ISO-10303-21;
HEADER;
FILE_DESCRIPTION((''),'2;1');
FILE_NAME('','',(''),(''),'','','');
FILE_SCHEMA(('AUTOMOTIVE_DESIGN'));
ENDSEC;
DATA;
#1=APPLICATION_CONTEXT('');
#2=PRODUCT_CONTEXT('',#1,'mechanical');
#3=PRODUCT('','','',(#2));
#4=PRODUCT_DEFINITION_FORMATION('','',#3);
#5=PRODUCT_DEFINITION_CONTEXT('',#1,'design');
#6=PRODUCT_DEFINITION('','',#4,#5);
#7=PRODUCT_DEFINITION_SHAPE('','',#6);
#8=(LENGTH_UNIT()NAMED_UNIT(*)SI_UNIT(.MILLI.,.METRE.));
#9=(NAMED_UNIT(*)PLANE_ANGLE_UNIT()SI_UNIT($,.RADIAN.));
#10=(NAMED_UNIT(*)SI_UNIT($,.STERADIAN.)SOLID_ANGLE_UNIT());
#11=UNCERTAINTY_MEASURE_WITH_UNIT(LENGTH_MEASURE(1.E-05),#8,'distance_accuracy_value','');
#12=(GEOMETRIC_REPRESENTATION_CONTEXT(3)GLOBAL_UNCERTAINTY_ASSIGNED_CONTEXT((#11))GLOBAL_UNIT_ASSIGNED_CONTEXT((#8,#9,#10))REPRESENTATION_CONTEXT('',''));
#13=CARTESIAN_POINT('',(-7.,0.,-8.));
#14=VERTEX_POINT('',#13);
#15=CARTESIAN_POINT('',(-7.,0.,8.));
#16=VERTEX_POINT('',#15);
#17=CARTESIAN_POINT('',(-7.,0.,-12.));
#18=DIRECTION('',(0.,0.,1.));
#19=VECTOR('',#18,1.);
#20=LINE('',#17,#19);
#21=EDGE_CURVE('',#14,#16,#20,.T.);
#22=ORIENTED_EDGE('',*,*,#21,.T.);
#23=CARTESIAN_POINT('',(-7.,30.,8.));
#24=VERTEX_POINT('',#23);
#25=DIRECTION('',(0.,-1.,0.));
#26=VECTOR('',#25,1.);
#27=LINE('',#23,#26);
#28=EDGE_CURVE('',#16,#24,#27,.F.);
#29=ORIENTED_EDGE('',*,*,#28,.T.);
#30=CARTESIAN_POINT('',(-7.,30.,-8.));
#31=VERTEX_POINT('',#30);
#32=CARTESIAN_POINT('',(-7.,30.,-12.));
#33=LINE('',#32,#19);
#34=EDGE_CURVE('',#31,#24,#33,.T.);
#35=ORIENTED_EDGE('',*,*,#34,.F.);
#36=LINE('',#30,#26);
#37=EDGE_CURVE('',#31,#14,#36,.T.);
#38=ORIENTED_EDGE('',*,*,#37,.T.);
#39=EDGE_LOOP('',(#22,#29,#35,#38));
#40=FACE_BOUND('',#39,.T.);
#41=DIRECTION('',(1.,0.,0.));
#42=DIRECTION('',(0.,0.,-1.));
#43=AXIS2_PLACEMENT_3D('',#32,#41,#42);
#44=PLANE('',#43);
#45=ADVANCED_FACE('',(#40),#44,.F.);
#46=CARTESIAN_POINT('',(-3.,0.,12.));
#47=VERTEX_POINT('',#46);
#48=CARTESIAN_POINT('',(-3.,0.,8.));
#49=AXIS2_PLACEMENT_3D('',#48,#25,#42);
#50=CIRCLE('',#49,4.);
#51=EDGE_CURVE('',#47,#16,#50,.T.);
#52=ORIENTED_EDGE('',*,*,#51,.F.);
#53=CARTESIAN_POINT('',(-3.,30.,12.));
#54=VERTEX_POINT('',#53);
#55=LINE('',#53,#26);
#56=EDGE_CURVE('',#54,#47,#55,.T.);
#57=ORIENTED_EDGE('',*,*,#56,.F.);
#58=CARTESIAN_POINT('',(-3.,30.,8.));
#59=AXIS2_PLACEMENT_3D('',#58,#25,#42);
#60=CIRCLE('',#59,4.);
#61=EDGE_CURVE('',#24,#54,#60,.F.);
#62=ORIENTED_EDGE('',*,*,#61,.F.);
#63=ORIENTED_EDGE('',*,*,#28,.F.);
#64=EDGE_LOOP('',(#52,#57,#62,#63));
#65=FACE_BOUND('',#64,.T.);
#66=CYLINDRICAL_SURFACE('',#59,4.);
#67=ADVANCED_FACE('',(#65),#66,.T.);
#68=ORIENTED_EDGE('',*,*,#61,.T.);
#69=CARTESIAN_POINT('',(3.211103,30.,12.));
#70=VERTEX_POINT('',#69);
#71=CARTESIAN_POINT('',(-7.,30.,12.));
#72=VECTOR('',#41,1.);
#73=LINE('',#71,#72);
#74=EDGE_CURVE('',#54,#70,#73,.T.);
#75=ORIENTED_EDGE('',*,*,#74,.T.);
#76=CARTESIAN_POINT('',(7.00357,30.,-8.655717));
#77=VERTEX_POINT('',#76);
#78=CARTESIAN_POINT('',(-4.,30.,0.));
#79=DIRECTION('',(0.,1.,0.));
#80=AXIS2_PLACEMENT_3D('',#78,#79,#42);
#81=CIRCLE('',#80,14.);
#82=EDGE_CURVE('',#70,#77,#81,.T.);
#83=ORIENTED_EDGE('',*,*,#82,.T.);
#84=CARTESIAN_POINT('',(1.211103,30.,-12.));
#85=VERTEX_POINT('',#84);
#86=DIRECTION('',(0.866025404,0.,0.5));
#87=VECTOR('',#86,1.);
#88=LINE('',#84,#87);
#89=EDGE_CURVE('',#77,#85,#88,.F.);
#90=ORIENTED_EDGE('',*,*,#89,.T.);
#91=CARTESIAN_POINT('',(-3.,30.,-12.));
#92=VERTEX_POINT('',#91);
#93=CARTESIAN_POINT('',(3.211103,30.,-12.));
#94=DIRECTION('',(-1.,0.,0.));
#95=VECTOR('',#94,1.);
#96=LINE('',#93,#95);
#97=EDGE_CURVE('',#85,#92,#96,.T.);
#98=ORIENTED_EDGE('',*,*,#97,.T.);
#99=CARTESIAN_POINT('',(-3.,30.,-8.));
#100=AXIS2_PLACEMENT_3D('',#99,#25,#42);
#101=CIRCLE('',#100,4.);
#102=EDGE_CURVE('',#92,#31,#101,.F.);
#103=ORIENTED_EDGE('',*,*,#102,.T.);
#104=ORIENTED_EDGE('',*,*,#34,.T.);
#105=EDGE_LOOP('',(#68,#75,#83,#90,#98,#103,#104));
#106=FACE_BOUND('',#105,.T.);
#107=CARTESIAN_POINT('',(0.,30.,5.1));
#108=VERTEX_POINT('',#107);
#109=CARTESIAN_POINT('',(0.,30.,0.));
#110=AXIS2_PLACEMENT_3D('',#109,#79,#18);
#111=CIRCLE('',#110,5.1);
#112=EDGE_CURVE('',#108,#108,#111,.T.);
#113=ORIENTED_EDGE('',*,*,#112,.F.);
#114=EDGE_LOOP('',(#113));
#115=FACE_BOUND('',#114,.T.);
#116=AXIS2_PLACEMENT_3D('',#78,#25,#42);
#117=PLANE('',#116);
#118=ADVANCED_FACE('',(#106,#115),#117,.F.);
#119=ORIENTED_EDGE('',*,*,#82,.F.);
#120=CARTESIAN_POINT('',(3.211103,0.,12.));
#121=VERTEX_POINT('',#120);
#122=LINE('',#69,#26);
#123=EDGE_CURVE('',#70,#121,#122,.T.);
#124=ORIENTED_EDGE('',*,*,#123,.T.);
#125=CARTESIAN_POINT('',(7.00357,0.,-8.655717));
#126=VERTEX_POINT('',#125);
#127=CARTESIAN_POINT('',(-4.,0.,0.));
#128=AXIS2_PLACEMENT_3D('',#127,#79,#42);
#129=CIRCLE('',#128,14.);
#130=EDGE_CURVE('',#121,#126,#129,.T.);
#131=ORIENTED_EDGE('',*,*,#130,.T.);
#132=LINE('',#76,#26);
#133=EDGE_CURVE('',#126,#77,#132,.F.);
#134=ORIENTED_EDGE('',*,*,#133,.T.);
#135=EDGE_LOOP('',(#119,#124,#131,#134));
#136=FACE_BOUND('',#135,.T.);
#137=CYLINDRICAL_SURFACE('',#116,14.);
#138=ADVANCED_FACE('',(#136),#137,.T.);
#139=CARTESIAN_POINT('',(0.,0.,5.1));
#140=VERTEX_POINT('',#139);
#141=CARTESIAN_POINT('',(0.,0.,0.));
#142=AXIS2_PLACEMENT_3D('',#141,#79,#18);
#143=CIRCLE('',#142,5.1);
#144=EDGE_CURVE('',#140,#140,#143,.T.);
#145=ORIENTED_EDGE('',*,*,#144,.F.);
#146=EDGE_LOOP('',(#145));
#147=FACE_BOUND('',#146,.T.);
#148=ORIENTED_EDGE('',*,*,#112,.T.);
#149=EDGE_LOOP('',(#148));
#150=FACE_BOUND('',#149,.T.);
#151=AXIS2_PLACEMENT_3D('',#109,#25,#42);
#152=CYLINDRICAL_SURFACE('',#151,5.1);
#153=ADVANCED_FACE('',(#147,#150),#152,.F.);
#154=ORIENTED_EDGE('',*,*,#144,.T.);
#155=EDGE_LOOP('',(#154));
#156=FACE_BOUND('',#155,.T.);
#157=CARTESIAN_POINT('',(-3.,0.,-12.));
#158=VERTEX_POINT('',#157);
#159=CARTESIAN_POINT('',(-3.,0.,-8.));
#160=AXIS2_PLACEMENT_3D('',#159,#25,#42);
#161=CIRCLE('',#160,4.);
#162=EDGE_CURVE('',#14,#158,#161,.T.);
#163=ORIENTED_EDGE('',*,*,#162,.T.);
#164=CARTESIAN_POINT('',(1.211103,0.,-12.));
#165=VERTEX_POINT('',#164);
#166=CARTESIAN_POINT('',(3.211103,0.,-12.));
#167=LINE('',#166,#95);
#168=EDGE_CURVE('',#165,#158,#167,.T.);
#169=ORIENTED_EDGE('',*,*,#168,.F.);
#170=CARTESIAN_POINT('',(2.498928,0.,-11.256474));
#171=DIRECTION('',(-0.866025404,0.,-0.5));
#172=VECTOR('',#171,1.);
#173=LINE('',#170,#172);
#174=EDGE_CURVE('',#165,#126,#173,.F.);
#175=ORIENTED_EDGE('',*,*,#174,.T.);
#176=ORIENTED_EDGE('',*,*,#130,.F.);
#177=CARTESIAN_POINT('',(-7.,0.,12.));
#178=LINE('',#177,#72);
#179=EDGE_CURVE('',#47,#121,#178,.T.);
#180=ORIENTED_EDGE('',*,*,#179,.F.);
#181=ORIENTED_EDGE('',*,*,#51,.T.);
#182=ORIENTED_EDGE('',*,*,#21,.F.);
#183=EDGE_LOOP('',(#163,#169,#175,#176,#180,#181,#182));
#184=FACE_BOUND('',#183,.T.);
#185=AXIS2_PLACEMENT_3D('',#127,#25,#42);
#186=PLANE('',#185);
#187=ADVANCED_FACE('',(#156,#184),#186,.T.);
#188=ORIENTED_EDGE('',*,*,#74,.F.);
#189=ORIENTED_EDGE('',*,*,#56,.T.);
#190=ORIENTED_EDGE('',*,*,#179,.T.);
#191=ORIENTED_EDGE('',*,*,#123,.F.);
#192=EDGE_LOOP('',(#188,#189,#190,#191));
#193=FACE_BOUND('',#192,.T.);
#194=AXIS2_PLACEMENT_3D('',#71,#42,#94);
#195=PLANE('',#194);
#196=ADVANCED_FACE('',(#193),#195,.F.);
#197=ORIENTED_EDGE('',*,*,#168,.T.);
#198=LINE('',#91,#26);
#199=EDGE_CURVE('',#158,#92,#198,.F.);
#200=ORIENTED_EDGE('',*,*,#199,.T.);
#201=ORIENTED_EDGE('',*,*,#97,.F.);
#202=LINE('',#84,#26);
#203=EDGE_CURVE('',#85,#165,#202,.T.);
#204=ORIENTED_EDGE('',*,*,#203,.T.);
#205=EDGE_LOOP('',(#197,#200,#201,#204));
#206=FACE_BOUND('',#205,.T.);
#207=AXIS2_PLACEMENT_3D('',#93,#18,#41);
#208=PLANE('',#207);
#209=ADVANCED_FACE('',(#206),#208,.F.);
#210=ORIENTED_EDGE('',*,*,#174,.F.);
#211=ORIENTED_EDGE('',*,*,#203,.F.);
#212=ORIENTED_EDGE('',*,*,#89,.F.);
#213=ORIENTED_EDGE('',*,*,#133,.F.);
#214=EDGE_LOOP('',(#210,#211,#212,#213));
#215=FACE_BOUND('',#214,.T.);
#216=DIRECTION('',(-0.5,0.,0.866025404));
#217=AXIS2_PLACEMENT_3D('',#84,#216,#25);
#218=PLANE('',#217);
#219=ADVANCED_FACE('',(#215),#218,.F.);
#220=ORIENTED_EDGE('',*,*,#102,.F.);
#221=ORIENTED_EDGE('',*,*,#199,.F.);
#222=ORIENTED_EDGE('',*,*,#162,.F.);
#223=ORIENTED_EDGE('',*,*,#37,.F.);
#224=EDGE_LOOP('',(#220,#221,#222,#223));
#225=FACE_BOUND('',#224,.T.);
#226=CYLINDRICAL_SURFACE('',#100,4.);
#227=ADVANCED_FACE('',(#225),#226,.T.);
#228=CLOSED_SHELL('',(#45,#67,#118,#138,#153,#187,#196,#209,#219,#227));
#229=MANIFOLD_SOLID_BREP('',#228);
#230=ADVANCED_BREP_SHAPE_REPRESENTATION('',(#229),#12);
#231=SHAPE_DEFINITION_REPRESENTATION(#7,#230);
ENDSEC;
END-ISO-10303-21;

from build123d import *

# Parameters (mm, degrees)
SKETCH1_R           = 5.1
BOSS_EXTRUDE1_DEPTH = 30
FILLET1_R           = 4
CHAMFER1_SIZE       = 2


with BuildPart() as part:
    # Sketch1 → Boss-Extrude1 (new body)
    with BuildSketch(Plane(origin=(0, 0, 0), x_dir=(1, 0, 0), z_dir=(0, 1, 0))):
        with BuildLine():
            Line((3.211102551, 12), (-7, 12))
            Line((-7, 12), (-7, -12))
            Line((-7, -12), (3.211102551, -12))
            ThreePointArc((3.211102551, -12), (10, 0), (3.211102551, 12))
        make_face()
        with Locations(Location((0, 0, 0), (0, 0, 270))):
            Circle(SKETCH1_R, mode=Mode.SUBTRACT)
    extrude(amount=BOSS_EXTRUDE1_DEPTH)

    # Fillet1
    fillet1_edges = [part.edges().sort_by_distance(p)[0] for p in [
        (-7, 15, 12),
        (-7, 15, -12),
    ]]
    fillet(fillet1_edges, radius=FILLET1_R)

    # Chamfer1
    # the kernel refuses this chamfer: 57.143323993, 2 mm, written as the material it takes off along each edge
    with BuildSketch(Plane(origin=(3.211102551, -18.277403027, -12), x_dir=(-1, 0, 0), z_dir=(0, 1, 0))) as chamfer1_piece_1:
        with BuildLine():
            Line((CHAMFER1_SIZE, 0), (-3.792467803, 3.344282846))
            ThreePointArc((-3.792467803, 3.344282846), (-2.856773862, 2.271800551), (0, 0))
            Line((0, 0), (CHAMFER1_SIZE, 0))
        make_face()
    extrude(amount=66.554806053, mode=Mode.SUBTRACT)


solid = part.part
